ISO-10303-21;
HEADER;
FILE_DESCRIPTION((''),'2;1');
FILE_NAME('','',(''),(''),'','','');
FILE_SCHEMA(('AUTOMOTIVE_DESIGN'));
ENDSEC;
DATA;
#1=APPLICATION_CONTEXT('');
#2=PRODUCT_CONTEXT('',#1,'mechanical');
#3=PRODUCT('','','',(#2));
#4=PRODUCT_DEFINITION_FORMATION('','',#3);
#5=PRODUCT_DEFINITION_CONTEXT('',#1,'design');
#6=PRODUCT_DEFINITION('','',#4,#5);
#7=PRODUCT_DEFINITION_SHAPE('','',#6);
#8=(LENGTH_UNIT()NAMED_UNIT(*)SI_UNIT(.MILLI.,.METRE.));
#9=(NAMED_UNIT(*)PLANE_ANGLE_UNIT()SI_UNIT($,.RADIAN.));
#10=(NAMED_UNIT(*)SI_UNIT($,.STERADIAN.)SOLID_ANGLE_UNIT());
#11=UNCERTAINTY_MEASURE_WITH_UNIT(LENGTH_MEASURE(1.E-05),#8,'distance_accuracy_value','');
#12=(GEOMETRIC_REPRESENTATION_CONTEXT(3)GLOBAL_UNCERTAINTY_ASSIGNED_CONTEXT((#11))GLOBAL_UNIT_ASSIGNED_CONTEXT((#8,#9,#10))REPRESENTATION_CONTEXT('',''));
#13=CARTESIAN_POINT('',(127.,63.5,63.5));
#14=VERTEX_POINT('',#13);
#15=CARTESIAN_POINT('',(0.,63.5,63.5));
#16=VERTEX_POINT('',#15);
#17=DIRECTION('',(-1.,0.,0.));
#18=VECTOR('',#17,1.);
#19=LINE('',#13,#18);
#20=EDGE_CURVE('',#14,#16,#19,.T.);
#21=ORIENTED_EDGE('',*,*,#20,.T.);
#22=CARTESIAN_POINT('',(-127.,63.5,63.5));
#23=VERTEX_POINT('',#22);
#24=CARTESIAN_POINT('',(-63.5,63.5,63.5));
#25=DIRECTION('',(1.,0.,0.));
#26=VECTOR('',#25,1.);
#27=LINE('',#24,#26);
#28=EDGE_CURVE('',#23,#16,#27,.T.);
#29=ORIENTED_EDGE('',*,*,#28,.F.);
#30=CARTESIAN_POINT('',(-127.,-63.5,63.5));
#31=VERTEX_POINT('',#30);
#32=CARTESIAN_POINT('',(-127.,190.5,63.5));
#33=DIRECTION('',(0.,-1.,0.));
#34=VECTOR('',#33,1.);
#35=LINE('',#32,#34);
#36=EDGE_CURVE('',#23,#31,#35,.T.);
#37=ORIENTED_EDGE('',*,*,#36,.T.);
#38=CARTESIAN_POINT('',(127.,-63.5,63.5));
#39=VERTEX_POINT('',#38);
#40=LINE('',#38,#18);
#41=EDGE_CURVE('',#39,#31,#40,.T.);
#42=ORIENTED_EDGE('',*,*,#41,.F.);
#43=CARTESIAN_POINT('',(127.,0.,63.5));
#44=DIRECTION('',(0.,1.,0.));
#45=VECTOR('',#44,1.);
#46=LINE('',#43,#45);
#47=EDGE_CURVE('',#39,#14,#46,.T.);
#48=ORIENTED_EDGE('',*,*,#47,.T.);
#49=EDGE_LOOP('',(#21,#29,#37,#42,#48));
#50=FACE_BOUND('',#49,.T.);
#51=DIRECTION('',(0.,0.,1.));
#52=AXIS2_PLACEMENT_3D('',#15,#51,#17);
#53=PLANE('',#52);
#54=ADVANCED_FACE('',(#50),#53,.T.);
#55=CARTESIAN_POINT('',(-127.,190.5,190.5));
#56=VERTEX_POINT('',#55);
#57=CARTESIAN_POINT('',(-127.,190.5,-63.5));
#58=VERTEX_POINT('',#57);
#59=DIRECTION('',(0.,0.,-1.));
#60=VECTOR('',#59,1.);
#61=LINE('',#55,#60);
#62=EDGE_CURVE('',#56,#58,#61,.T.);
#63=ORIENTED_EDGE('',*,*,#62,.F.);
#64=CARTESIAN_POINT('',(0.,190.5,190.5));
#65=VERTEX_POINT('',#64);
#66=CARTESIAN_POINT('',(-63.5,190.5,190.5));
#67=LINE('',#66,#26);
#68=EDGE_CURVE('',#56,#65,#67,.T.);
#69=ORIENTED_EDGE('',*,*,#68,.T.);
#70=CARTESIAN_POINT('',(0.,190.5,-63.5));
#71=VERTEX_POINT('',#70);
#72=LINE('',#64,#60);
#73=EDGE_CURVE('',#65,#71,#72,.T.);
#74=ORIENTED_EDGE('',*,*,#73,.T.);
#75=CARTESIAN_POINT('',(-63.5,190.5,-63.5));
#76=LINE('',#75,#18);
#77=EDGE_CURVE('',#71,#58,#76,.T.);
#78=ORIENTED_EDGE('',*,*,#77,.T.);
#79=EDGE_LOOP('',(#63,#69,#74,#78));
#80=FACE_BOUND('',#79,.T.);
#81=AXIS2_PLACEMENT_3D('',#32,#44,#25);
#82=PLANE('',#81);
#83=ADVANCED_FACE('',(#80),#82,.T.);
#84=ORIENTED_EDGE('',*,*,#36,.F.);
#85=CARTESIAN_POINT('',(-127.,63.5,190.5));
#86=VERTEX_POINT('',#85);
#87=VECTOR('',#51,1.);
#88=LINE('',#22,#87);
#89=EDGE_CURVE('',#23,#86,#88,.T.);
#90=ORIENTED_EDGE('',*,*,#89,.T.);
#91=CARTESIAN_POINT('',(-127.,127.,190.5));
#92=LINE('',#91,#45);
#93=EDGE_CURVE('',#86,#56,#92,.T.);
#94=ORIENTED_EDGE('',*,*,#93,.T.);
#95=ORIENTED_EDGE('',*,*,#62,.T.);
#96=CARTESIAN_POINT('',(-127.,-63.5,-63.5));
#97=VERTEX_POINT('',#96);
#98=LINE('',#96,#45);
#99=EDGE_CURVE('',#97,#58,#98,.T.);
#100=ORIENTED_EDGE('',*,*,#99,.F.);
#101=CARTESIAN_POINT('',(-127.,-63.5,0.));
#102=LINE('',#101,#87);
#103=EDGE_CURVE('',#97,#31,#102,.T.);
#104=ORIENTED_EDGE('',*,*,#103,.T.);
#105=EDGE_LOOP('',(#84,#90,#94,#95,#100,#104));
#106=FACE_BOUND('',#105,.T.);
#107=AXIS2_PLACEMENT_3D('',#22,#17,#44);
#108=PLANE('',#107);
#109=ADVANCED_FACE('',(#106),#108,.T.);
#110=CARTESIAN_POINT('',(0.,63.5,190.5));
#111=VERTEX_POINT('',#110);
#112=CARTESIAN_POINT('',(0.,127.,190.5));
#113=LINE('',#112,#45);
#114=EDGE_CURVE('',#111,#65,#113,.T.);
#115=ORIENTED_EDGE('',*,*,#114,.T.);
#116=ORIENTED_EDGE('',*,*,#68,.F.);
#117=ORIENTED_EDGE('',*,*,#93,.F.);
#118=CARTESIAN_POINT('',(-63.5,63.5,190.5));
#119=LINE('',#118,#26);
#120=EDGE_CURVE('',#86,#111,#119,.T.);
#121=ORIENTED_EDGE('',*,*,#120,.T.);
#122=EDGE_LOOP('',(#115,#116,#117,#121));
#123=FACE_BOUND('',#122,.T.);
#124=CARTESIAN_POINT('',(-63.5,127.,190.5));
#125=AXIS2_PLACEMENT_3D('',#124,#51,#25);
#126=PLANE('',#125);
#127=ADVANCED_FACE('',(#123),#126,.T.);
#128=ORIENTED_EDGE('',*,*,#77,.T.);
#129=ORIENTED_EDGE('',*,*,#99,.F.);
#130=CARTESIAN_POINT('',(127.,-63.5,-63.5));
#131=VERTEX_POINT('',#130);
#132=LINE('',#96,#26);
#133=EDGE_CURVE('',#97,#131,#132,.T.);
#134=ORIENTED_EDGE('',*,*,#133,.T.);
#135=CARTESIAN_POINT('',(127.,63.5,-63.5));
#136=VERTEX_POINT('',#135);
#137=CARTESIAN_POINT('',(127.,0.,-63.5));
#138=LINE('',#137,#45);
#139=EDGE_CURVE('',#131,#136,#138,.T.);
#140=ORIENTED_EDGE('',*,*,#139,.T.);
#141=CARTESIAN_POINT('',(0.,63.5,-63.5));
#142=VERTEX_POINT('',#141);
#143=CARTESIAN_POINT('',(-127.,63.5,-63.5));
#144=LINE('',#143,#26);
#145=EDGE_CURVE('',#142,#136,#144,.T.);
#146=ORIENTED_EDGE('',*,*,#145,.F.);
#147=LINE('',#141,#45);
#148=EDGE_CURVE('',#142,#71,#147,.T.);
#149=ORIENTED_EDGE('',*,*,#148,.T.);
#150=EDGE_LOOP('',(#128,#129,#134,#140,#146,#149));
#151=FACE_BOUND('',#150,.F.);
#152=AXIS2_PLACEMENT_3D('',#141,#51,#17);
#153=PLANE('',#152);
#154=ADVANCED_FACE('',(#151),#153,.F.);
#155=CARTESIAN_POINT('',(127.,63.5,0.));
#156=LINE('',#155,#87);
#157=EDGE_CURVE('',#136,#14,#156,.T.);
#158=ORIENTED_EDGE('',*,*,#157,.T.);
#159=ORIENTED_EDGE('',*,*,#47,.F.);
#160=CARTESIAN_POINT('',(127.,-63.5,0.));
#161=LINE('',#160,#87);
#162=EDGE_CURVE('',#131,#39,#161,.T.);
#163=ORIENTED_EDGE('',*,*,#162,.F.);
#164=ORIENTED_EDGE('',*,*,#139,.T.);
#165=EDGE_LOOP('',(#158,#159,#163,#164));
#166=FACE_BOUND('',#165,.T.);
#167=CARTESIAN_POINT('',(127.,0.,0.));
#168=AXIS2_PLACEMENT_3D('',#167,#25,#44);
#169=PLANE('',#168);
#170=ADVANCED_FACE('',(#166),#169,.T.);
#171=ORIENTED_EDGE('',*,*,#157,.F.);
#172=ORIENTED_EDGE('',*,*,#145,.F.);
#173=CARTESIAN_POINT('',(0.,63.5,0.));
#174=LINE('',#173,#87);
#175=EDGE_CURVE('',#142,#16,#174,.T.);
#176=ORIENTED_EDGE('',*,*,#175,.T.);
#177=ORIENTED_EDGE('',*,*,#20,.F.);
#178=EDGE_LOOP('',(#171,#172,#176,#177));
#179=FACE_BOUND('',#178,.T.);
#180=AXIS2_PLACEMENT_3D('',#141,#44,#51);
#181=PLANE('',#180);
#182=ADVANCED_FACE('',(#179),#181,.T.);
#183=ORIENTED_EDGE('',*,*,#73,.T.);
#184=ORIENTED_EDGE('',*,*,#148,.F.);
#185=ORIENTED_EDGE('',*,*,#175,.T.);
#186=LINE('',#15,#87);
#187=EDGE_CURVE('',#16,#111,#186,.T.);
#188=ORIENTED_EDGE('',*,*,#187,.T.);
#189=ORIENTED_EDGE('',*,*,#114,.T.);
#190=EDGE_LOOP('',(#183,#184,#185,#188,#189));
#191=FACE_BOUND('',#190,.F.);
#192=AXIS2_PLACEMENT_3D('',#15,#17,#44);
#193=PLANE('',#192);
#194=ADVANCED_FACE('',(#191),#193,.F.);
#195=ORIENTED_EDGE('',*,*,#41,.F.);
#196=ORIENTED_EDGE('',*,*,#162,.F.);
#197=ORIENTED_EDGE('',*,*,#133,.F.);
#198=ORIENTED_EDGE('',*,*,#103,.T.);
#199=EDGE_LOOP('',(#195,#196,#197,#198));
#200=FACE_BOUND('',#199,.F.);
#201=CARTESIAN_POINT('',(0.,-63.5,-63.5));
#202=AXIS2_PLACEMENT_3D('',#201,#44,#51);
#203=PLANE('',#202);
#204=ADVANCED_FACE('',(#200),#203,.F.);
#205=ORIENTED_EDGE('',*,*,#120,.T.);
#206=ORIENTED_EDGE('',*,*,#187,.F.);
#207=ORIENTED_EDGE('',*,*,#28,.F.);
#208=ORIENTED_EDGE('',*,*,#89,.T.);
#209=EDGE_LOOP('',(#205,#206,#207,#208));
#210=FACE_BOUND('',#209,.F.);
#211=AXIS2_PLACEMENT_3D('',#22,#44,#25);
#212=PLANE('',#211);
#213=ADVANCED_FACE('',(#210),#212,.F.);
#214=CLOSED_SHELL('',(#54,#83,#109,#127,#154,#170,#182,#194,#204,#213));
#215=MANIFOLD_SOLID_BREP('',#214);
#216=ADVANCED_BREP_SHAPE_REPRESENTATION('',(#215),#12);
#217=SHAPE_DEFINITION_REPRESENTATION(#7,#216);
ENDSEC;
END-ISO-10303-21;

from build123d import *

# Parameters (mm, degrees)
F1_W     = 127
F1_H     = 127
F2_DEPTH = 127
F3_W     = 127
F3_H     = 127
F4_DEPTH = 127
F5_W     = 127
F5_H     = 127
F6_DEPTH = 127


# Not quite as in the source:
# - a variable given as a bare number and used for a length is read in inches; the dataset says mm whatever the document's units were


with BuildPart() as f2:
    # F1 (on Right) → F2 (new body, symmetric)
    with BuildSketch(Plane.YZ):
        Rectangle(F1_W, F1_H)
    extrude(amount=F2_DEPTH, both=True)

    # F3 (on face) → F4 (join)
    with BuildSketch(Plane(origin=(0, 63.5, 0), x_dir=(-1, 0, 0), z_dir=(0, 1, 0))):
        with Locations((63.5, 0)):
            Rectangle(F3_W, F3_H)
    extrude(amount=F4_DEPTH)

    # F5 (on face) → F6 (join)
    with BuildSketch(Plane.XY.offset(63.5)):
        with Locations((-63.5, 127)):
            Rectangle(F5_W, F5_H)
    extrude(amount=F6_DEPTH)


solid = f2.part
